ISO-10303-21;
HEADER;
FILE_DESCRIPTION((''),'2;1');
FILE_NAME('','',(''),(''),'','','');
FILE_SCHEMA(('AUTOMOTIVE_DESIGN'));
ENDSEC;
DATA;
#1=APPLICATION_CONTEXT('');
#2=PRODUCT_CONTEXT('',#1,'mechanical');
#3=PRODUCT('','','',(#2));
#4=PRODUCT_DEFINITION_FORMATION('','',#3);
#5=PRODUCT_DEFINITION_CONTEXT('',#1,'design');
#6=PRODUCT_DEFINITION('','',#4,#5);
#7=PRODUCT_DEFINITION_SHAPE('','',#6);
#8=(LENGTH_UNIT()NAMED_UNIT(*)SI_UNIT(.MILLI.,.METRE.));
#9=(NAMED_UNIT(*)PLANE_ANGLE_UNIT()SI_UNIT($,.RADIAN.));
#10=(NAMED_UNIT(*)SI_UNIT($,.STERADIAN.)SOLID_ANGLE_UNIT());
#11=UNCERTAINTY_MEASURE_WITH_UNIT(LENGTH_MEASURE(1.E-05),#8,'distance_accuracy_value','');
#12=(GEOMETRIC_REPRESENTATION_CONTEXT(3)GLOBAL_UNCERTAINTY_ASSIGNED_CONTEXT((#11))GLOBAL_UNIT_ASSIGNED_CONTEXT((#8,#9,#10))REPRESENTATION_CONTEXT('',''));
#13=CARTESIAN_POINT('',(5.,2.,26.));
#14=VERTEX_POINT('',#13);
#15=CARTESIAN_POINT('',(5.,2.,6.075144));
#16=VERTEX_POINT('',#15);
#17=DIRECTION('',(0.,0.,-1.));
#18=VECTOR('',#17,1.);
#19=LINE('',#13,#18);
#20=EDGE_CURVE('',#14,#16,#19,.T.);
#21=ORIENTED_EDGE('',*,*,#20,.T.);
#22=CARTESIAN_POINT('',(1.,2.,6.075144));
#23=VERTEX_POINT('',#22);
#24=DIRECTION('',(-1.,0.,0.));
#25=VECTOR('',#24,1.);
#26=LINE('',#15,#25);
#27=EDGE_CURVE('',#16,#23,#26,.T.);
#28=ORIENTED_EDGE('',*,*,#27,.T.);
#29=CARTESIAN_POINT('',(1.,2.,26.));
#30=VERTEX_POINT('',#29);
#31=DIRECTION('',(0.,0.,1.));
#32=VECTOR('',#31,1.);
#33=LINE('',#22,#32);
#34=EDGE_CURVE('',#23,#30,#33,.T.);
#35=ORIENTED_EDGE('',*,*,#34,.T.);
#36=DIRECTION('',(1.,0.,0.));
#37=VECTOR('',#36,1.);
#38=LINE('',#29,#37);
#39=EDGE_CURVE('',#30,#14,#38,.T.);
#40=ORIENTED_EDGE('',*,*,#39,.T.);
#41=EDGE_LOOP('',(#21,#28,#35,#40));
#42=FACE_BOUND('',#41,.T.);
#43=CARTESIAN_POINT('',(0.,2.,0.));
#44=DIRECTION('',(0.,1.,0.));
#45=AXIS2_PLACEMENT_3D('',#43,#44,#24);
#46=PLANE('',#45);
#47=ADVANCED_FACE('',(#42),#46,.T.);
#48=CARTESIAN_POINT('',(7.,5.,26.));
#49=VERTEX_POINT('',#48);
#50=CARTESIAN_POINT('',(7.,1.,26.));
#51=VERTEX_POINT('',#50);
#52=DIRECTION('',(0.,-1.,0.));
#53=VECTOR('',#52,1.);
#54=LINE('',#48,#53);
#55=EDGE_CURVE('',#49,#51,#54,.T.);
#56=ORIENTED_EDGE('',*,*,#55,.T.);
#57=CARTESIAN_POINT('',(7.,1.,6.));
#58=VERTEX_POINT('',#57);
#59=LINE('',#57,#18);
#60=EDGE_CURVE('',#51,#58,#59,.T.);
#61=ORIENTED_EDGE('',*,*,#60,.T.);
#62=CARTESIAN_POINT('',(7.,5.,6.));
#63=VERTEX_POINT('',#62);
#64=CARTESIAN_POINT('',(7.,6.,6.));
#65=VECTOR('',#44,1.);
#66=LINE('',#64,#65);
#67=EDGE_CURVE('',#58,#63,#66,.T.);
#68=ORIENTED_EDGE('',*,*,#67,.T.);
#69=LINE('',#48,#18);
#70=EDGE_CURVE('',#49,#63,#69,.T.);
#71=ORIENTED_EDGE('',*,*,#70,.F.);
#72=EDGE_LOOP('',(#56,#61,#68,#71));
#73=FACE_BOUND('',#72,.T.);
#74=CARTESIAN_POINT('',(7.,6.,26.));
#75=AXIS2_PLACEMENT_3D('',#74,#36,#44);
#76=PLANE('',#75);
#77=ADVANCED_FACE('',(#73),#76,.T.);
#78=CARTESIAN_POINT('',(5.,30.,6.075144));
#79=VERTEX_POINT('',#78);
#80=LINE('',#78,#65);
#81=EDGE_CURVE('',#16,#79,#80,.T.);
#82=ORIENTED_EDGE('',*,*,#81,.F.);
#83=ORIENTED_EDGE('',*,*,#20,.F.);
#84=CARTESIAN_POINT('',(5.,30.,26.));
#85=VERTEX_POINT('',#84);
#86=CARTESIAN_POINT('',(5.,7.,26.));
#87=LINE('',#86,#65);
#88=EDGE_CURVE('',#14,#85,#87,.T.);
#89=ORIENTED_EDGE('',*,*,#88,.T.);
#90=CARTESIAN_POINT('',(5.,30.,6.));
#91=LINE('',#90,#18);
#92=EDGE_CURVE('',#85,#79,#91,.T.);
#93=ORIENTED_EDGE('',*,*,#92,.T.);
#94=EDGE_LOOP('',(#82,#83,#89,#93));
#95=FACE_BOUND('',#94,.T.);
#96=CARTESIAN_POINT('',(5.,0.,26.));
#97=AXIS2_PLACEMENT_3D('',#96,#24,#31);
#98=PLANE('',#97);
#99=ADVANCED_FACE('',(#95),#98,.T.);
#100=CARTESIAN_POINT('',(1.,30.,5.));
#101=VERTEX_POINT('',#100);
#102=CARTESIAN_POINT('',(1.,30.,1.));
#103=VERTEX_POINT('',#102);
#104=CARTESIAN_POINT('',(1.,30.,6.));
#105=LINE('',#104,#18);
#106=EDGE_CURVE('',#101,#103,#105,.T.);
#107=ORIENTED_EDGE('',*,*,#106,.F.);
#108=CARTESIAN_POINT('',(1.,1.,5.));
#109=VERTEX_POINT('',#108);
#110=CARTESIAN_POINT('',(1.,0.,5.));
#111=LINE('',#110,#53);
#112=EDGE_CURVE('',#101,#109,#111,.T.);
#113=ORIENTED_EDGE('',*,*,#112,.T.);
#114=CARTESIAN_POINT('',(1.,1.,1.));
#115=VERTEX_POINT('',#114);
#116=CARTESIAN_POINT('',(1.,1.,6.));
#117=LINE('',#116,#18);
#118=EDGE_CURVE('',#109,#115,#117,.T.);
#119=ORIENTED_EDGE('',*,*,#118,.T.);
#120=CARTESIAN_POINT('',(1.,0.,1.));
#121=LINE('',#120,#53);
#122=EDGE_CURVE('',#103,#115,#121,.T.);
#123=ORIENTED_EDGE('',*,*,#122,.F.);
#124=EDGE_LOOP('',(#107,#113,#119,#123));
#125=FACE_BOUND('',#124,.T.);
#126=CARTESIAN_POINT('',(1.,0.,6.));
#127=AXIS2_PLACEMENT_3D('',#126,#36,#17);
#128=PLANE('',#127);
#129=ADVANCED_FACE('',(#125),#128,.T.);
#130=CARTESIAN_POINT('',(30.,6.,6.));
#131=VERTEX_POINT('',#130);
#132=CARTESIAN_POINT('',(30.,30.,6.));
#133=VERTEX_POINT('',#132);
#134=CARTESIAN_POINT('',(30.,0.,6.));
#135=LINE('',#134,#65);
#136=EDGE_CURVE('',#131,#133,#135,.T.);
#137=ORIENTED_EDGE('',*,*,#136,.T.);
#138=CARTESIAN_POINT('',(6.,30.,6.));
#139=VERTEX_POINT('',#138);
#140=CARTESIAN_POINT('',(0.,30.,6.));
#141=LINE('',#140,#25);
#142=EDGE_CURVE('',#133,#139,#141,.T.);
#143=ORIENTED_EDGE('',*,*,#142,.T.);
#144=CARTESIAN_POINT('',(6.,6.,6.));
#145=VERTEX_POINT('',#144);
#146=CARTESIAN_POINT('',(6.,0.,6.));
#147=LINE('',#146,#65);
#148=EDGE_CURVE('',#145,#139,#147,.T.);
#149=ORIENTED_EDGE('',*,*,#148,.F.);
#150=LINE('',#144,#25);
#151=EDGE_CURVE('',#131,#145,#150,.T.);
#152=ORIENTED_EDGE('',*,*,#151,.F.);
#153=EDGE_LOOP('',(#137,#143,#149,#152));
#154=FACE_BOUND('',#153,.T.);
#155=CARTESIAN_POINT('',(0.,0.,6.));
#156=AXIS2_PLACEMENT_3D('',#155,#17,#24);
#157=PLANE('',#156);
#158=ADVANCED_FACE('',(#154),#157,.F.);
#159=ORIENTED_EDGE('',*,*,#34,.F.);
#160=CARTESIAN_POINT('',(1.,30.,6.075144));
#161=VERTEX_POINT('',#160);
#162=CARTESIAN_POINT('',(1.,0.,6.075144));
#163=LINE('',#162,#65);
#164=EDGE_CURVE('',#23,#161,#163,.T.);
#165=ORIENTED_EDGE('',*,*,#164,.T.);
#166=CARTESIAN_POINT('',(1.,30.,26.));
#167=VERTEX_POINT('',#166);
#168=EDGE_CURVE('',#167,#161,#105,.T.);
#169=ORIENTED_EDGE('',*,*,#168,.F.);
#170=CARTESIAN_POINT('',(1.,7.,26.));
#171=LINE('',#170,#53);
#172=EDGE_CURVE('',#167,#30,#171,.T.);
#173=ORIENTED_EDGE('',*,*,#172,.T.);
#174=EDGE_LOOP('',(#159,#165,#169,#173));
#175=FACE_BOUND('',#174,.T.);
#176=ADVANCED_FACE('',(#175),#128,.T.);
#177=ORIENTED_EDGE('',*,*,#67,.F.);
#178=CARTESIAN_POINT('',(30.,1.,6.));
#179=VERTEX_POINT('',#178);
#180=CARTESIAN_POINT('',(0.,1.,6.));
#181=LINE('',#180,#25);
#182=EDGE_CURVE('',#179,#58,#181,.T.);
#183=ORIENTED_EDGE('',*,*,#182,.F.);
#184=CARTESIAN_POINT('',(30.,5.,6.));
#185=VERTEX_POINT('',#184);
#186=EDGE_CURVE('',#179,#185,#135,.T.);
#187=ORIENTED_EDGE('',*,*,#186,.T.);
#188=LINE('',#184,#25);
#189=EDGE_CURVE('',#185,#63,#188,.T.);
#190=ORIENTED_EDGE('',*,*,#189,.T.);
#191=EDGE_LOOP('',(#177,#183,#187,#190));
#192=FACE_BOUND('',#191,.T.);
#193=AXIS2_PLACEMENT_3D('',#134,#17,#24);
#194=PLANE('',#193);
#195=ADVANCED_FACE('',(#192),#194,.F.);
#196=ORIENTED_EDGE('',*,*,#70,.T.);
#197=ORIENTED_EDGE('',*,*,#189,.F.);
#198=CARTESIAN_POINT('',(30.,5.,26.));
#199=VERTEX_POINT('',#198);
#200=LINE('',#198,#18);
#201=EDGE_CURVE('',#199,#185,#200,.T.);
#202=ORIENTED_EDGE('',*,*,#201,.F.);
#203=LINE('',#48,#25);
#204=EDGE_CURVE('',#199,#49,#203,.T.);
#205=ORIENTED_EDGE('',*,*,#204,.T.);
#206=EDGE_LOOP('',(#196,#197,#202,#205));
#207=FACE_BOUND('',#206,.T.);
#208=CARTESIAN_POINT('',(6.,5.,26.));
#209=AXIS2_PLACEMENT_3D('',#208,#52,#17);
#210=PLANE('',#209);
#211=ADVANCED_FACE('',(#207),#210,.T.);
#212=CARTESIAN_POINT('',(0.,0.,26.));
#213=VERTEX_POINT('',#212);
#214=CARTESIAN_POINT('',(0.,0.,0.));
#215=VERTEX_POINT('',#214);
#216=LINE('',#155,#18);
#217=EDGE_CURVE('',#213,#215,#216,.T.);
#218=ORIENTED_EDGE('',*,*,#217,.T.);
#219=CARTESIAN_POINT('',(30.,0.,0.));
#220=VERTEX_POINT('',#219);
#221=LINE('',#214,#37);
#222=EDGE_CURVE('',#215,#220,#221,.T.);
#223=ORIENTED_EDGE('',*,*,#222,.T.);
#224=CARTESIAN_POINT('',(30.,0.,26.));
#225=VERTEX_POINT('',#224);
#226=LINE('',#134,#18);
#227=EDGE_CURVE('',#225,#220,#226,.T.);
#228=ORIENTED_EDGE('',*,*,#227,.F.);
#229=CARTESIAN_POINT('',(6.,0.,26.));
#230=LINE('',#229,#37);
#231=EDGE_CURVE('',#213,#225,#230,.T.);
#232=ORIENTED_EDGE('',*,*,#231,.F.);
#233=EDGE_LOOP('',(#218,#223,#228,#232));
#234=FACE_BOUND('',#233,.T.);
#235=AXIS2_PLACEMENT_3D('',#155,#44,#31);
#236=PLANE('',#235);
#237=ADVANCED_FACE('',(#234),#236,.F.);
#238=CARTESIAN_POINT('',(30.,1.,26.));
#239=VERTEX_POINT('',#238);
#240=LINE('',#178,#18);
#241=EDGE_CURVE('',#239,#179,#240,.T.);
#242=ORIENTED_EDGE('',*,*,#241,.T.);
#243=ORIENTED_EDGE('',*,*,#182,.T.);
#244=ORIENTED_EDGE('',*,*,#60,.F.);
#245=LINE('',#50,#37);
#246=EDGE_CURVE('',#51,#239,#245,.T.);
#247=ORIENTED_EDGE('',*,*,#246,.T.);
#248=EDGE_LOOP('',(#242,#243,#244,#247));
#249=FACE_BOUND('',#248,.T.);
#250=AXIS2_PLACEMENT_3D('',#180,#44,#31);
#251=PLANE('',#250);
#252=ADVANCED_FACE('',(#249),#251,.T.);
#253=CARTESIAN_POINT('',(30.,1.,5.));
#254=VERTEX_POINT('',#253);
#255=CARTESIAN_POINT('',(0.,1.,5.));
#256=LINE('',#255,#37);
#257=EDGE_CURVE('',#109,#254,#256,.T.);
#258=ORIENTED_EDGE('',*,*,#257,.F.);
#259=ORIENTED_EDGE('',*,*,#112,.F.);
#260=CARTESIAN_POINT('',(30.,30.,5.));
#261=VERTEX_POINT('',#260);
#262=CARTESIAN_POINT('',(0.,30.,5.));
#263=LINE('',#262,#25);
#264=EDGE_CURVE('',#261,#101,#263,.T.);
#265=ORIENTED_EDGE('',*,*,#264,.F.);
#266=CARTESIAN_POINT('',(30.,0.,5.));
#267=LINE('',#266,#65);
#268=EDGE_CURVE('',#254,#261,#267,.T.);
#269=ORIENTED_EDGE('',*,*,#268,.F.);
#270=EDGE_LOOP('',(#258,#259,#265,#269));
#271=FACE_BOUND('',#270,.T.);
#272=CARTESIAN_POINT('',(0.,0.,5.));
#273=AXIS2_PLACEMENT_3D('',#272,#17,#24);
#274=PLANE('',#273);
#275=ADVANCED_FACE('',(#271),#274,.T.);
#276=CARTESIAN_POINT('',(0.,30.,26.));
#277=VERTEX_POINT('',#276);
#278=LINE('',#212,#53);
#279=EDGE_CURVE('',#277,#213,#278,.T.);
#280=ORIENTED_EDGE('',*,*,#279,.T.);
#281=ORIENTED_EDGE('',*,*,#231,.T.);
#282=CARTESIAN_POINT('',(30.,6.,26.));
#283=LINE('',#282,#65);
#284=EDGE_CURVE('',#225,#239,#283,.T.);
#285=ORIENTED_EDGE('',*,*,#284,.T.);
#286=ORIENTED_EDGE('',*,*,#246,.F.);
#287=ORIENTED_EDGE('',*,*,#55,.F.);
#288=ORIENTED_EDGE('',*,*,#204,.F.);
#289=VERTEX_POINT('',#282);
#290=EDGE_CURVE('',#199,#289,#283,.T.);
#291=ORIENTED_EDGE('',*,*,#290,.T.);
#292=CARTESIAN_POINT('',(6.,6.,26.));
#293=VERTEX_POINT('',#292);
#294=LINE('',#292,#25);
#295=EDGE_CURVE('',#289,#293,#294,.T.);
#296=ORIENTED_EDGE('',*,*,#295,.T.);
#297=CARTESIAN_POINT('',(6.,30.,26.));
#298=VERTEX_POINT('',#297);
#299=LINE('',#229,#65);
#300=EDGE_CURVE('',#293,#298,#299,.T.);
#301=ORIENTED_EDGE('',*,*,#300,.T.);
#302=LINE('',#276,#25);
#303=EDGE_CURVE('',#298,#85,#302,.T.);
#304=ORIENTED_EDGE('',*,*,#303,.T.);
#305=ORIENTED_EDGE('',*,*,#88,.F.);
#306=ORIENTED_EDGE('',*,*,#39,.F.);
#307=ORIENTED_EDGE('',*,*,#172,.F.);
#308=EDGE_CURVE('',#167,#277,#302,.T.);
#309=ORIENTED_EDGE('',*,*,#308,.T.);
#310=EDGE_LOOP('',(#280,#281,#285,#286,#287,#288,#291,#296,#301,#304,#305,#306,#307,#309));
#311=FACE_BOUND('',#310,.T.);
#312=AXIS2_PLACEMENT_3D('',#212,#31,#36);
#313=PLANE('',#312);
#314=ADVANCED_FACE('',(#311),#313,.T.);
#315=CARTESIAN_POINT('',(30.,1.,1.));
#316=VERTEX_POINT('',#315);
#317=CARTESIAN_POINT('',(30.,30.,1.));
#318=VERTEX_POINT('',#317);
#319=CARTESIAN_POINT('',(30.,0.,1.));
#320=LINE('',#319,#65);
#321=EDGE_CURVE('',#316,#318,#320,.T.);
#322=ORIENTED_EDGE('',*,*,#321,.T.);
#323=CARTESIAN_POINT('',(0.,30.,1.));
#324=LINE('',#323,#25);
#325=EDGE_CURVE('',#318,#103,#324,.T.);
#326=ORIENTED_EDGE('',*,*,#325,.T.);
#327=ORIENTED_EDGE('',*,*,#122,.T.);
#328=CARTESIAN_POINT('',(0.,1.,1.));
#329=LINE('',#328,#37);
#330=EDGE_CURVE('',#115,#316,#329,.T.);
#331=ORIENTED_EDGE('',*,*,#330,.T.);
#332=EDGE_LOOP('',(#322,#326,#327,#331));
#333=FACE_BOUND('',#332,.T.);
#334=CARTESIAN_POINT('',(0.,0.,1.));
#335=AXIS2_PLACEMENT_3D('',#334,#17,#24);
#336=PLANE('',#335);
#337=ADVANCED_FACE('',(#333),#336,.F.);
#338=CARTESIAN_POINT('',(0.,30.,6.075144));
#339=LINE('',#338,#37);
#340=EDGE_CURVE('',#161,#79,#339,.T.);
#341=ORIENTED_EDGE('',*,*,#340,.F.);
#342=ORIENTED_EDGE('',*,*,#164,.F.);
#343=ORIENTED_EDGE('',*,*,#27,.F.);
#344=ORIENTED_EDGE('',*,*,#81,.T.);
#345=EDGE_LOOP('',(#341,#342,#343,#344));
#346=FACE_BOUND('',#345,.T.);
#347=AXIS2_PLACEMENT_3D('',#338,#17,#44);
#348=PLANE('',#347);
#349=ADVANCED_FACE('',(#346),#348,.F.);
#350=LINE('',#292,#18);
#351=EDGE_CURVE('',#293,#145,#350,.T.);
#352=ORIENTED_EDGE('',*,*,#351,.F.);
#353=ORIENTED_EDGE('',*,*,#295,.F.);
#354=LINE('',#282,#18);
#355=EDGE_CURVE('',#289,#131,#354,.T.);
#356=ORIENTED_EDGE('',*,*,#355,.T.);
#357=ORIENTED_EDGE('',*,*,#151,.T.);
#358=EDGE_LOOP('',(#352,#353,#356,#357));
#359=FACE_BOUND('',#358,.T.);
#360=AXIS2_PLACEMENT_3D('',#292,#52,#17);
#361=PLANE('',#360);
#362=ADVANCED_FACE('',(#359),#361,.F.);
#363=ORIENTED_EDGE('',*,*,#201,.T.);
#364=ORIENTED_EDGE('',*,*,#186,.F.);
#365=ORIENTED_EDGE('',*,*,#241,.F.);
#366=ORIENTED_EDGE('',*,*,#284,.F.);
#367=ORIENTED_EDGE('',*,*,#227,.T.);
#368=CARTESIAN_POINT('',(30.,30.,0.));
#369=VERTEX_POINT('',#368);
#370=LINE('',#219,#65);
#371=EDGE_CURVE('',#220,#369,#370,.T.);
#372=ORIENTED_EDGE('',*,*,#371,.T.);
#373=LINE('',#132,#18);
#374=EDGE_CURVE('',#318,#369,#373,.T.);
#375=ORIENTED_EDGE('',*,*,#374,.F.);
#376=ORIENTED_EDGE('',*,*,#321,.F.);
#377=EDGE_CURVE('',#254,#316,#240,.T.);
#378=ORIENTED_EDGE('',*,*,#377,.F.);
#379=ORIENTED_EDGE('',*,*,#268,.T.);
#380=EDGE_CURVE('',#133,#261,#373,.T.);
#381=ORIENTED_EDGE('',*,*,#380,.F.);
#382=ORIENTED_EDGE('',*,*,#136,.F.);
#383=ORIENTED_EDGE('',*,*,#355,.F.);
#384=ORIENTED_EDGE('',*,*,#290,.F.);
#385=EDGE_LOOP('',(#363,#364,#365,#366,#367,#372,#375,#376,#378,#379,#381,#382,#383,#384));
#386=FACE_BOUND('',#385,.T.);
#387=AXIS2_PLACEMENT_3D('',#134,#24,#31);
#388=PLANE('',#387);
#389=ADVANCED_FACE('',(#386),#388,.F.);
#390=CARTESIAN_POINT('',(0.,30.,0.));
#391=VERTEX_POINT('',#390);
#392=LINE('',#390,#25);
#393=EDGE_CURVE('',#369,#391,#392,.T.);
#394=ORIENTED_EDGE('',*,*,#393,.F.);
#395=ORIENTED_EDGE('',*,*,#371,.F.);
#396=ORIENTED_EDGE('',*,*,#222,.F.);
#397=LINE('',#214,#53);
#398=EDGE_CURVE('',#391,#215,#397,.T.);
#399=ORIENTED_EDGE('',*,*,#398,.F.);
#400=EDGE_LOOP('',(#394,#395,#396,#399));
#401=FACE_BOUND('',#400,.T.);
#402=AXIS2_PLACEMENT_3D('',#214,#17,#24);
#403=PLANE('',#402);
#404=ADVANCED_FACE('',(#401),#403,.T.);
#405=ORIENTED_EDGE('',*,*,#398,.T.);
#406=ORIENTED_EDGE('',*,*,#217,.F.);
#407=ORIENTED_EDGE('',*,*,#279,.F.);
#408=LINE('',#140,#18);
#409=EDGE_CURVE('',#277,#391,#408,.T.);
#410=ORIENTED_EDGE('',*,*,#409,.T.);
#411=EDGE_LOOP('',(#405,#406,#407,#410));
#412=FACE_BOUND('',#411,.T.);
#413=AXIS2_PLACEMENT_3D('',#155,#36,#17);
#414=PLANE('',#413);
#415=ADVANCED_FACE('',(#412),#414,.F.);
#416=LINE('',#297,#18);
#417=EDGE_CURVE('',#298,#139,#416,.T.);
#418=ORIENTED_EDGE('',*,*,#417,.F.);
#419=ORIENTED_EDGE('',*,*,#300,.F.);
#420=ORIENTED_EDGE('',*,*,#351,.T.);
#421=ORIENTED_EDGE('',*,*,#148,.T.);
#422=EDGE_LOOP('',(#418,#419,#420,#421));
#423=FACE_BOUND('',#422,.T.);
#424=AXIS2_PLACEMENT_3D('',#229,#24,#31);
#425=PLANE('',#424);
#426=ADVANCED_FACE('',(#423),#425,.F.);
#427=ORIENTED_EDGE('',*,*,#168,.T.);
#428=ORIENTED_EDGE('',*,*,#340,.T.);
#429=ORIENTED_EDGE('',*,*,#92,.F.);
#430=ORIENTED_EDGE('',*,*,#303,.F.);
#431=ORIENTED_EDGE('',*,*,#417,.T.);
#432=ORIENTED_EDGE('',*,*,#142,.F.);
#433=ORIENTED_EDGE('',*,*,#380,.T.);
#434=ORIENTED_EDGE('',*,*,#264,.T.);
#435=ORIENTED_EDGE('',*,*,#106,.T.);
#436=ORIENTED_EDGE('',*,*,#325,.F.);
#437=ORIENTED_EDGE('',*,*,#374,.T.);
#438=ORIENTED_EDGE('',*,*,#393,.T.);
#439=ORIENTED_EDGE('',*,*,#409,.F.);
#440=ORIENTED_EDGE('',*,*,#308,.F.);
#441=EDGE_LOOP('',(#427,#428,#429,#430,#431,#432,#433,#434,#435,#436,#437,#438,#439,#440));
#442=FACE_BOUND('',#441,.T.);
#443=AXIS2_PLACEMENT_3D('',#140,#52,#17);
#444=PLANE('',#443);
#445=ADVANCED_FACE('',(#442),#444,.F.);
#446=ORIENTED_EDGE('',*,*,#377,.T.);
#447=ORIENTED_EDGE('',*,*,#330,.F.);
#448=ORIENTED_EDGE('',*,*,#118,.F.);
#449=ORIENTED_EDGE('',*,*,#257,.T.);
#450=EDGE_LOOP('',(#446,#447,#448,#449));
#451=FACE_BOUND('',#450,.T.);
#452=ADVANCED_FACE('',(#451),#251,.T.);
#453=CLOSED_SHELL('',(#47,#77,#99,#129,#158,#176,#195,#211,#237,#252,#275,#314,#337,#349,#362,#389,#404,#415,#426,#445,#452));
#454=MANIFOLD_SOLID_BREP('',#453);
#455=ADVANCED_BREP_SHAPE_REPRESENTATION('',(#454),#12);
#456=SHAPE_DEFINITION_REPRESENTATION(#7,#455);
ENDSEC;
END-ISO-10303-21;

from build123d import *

# Parameters (mm, degrees)
SKETCH1_W            = 30
SKETCH1_H            = 30
BOSS_EXTRUDE1_DEPTH  = 6
BOSS_EXTRUDE4_DEPTH  = 20
SKETCH4_W            = 2
SKETCH4_H            = 2
BOSS_EXTRUDE6_DEPTH  = 20
SKETCH5_W            = 24
SKETCH5_H            = 6
BOSS_EXTRUDE7_DEPTH  = 20
SHELL2_START         = 7
SHELL2_DEPTH         = 23
SHELL2_START_2       = 1
SHELL2_2_DEPTH       = 4
SHELL2_START_3       = 5
SHELL2_3_OUTLINE_W   = 29
SHELL2_3_OUTLINE_H   = 4
SHELL2_3_DEPTH       = 2
SKETCH7_W            = 23
SKETCH7_H            = 1
BOSS_EXTRUDE8_DEPTH  = 5
SKETCH9_W            = 1.075143629
SKETCH9_H            = 23
BOSS_EXTRUDE9_DEPTH  = 5
SKETCH10_W           = 4
SKETCH10_H           = 23
CUT_EXTRUDE1_DEPTH   = 10
SKETCH11_W           = 23
SKETCH11_H           = 4
CUT_EXTRUDE2_DEPTH   = 10
BOSS_EXTRUDE11_DEPTH = 20
SKETCH14_W           = 4
SKETCH14_H           = 19.924856371
CUT_EXTRUDE4_DEPTH   = 5


# Read off the part's stored shape, not the designer's step: Shell2
with BuildPart() as part:
    # Sketch1 → Boss-Extrude1 (new body)
    with BuildSketch(Plane.XY):
        with Locations((15, 15)):
            Rectangle(SKETCH1_W, SKETCH1_H)
    extrude(amount=BOSS_EXTRUDE1_DEPTH)

    # Sketch2 → Boss-Extrude4 (add)
    with BuildSketch(Plane.XY.offset(6)):
        Polygon((5, 6), (6, 6), (6, 30), (0, 30), (0, 6), align=None)
    extrude(amount=BOSS_EXTRUDE4_DEPTH)

    # Sketch4 → Boss-Extrude6 (add)
    with BuildSketch(Plane.XY.offset(6)):
        with Locations((5, 5)):
            Rectangle(SKETCH4_W, SKETCH4_H)
    extrude(amount=BOSS_EXTRUDE6_DEPTH)

    # Sketch5 → Boss-Extrude7 (add)
    with BuildSketch(Plane.XY.offset(6)):
        with Locations((18, 3)):
            Rectangle(SKETCH5_W, SKETCH5_H)
    extrude(amount=BOSS_EXTRUDE7_DEPTH)

    # Shell2 outline → Shell2 (cut)
    with BuildSketch(Plane(origin=(0, 0, 0), x_dir=(1, 0, 0), z_dir=(0, 1, 0)).offset(SHELL2_START)):
        Polygon((5, -5), (30, -5), (30, -1), (1, -1), (1, -25), (5, -25), align=None)
    extrude(amount=SHELL2_DEPTH, mode=Mode.SUBTRACT)

    # Shell2 2 outline → Shell2 2 (cut)
    with BuildSketch(Plane(origin=(0, 0, 0), x_dir=(1, 0, 0), z_dir=(0, 1, 0)).offset(SHELL2_START_2)):
        Polygon((7, -5), (7, -25), (30, -25), (30, -1), (1, -1), (1, -5), align=None)
    extrude(amount=SHELL2_2_DEPTH, mode=Mode.SUBTRACT)

    # Shell2 3 outline → Shell2 3 (cut)
    with BuildSketch(Plane(origin=(0, 0, 0), x_dir=(1, 0, 0), z_dir=(0, 1, 0)).offset(SHELL2_START_3)):
        with Locations((15.5, -3)):
            Rectangle(SHELL2_3_OUTLINE_W, SHELL2_3_OUTLINE_H)
    extrude(amount=SHELL2_3_DEPTH, mode=Mode.SUBTRACT)

    # Sketch7 → Boss-Extrude8 (add)
    with BuildSketch(Plane.XZ.offset(-5)):
        with Locations((18.5, 5.5)):
            Rectangle(SKETCH7_W, SKETCH7_H)
    extrude(amount=BOSS_EXTRUDE8_DEPTH)

    # Sketch9 → Boss-Extrude9 (add)
    with BuildSketch(Plane.ZY.offset(-5)):
        with Locations((5.537571814, 18.5)):
            Rectangle(SKETCH9_W, SKETCH9_H)
    extrude(amount=BOSS_EXTRUDE9_DEPTH)

    # Sketch10 → Cut-Extrude1 (cut)
    with BuildSketch(Plane.XY.offset(26)):
        with Locations((3, 18.5)):
            Rectangle(SKETCH10_W, SKETCH10_H)
    extrude(amount=-CUT_EXTRUDE1_DEPTH, mode=Mode.SUBTRACT)

    # Sketch11 → Cut-Extrude2 (cut)
    with BuildSketch(Plane.XY.offset(26)):
        with Locations((18.5, 3)):
            Rectangle(SKETCH11_W, SKETCH11_H)
    extrude(amount=-CUT_EXTRUDE2_DEPTH, mode=Mode.SUBTRACT)

    # Sketch12 → Boss-Extrude11 (add)
    with BuildSketch(Plane.XY.offset(6)):
        Polygon((6, 0), (6, 4), (4, 4), (4, 6), (0, 6), (0, 0), align=None)
    extrude(amount=BOSS_EXTRUDE11_DEPTH)

    # Sketch14 → Cut-Extrude4 (cut)
    with BuildSketch(Plane(origin=(0, 7, 0), x_dir=(1, 0, 0), z_dir=(0, 1, 0))):
        with Locations((3, -16.037571815)):
            Rectangle(SKETCH14_W, SKETCH14_H)
    extrude(amount=-CUT_EXTRUDE4_DEPTH, mode=Mode.SUBTRACT)


solid = part.part
